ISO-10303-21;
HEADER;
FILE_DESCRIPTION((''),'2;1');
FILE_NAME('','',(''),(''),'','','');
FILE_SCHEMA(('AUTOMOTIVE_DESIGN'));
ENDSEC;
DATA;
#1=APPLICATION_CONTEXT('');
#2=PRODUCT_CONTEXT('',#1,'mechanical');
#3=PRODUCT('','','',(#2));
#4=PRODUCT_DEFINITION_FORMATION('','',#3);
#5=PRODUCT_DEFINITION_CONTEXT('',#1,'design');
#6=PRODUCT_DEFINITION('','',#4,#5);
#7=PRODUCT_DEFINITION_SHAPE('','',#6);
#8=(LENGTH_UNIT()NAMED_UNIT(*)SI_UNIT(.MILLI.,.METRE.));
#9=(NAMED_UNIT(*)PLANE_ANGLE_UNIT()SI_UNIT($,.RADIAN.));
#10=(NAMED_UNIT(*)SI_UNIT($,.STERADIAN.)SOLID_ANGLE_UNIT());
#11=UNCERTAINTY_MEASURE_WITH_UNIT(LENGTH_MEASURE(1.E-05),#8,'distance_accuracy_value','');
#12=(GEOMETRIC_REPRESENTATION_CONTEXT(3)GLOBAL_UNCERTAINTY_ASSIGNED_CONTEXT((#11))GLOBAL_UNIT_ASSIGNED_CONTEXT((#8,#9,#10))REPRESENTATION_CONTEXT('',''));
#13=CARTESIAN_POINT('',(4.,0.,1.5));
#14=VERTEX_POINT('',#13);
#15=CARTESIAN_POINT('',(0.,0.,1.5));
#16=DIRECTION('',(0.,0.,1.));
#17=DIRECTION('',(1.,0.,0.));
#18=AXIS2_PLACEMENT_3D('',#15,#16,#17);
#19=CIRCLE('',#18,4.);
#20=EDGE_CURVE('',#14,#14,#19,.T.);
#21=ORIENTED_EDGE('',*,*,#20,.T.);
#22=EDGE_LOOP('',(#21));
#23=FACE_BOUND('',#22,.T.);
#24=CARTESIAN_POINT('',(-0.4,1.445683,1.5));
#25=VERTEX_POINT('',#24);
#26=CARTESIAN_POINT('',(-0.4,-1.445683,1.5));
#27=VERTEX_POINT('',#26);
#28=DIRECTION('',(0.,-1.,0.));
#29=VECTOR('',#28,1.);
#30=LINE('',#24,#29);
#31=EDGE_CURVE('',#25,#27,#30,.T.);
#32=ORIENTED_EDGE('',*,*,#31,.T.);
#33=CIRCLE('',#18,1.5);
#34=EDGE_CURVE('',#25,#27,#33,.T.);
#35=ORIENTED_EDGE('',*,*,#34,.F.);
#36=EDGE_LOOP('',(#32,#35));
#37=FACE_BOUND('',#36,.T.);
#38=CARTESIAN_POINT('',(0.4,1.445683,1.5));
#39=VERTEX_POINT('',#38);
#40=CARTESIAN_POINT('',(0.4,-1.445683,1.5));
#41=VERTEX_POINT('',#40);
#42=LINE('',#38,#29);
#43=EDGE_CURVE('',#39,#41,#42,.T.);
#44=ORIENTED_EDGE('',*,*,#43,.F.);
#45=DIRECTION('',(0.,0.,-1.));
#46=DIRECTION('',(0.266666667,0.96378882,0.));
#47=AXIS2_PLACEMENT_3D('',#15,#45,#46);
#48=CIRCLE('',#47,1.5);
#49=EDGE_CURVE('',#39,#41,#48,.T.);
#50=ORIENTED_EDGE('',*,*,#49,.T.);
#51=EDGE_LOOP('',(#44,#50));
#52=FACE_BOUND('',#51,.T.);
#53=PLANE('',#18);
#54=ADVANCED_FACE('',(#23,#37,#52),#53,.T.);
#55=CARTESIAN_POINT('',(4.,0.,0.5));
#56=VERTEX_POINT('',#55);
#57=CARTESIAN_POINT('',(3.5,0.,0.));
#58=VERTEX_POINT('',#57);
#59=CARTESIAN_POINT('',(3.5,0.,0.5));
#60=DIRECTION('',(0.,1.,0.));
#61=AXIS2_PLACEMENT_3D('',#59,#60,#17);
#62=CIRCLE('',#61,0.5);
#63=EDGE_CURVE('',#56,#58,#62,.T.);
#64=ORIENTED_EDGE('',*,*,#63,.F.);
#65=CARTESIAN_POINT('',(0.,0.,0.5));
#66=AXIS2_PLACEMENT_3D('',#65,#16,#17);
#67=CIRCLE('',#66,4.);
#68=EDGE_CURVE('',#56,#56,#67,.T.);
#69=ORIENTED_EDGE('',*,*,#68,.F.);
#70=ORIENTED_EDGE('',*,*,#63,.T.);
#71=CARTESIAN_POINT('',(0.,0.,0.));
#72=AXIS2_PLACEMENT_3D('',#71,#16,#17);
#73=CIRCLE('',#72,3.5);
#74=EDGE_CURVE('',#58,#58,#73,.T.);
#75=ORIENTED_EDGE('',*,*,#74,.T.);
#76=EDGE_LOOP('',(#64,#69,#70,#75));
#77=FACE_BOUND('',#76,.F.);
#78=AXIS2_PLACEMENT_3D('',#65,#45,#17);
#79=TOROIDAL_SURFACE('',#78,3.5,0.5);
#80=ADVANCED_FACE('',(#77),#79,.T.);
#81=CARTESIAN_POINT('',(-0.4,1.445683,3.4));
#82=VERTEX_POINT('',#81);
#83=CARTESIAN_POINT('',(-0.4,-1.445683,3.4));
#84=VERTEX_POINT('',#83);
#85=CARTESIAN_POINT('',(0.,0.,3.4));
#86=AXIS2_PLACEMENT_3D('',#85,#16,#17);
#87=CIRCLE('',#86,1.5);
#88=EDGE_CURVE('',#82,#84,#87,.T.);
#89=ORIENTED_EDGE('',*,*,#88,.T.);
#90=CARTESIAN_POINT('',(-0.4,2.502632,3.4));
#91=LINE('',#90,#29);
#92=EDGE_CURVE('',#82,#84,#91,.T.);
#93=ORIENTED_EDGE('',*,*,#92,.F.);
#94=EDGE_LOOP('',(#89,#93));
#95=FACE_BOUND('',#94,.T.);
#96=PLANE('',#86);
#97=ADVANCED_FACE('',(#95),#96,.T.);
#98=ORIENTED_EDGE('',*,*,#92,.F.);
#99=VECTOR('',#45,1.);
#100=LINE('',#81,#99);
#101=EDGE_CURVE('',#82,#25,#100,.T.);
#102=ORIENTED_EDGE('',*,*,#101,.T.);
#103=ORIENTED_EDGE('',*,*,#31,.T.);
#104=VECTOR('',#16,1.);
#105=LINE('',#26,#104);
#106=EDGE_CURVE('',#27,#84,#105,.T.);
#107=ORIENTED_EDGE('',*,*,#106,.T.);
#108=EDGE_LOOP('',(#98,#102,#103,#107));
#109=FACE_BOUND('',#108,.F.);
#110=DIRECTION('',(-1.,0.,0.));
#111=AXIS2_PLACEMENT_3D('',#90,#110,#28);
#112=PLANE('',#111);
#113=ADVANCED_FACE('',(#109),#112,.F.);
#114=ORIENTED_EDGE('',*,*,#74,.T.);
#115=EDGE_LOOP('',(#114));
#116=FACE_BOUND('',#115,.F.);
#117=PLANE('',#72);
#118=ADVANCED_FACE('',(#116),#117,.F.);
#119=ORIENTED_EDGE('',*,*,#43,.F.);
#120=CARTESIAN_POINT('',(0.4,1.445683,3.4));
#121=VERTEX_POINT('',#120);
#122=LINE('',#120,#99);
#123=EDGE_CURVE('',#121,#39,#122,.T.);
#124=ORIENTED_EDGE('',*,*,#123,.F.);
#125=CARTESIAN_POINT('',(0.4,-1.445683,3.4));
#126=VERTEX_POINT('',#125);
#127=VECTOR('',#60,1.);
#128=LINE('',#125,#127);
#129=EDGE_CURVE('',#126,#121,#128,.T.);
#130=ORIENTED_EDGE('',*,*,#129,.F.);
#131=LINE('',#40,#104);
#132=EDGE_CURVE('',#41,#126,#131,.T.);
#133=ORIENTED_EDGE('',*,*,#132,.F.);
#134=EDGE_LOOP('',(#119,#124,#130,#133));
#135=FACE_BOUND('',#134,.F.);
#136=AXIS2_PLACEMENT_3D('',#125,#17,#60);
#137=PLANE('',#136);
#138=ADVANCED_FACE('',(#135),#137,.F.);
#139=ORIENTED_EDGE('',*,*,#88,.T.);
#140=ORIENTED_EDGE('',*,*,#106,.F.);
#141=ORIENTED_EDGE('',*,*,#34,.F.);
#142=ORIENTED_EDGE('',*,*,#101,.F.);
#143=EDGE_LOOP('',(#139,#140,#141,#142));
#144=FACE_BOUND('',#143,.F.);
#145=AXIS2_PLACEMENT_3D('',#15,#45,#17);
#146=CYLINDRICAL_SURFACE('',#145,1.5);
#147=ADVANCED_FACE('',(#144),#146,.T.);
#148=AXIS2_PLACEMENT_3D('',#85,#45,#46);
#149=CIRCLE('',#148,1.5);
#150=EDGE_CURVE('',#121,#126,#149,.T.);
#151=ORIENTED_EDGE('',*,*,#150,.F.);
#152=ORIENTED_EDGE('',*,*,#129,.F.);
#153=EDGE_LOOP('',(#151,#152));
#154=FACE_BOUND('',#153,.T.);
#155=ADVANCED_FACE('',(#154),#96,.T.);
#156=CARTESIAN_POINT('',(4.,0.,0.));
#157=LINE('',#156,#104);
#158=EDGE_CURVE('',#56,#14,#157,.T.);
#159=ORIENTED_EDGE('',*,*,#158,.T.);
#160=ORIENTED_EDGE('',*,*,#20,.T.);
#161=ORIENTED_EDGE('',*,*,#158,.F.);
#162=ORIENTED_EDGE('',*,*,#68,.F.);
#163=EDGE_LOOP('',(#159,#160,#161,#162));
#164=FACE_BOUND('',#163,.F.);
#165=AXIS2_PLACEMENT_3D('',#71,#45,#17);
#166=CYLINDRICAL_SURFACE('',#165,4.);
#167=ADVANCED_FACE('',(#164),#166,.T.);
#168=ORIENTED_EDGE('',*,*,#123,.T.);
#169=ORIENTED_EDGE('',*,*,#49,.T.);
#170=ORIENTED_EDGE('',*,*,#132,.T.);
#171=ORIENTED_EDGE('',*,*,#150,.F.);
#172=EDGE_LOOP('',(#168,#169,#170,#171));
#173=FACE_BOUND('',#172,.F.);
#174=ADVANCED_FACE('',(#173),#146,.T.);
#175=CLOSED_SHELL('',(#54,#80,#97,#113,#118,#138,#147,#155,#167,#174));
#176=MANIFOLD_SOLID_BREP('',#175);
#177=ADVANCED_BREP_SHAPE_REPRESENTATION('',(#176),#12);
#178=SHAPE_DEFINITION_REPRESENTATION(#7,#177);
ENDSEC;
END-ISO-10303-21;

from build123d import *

# Parameters (mm, degrees)
F0_R     = 4
F1_DEPTH = 1.5
F2_R     = 1.5
F3_DEPTH = 1.9
F5_DEPTH = 1.9
F7_DEPTH = 0.3
F8_R     = 0.5


# Not quite as in the source:
# - a feature names something its author has since deleted; it is built from what else it names


with BuildPart() as f1:
    # F0 (on Top) → F1 (new body)
    with BuildSketch(Plane.XY):
        Circle(F0_R)
    extrude(amount=F1_DEPTH)

    # F2 (on face) → F3 (join)
    with BuildSketch(Plane.XY.offset(1.5)):
        Circle(F2_R)
    extrude(amount=F3_DEPTH)

    # F4 (on face) → F5 (cut)
    with BuildSketch(Plane.XY.offset(3.4)):
        with BuildLine():
            ThreePointArc((-0.4, -1.4456832295), (0, -1.5), (0.4, -1.4456832295))
            Line((0.4, -1.4456832295), (0.4, 1.4456832295))
            ThreePointArc((0.4, 1.4456832295), (0, 1.5), (-0.4, 1.4456832295))
            Line((-0.4, 1.4456832295), (-0.4, -1.4456832295))
        make_face()
        with BuildLine():
            ThreePointArc((-0.4, 1.4456832295), (0, 1.5), (0.4, 1.4456832295))
            Line((0.4, 1.4456832295), (0.4, 2.5026321411))
            Line((0.4, 2.5026321411), (-0.4, 2.5026321411))
            Line((-0.4, 2.5026321411), (-0.4, 1.4456832295))
        make_face()
    extrude(amount=-F5_DEPTH, mode=Mode.SUBTRACT)

    # F6 (on face) → F7 (join)
    with BuildSketch(Plane.XY.offset(1.5)):
        with BuildLine():
            ThreePointArc((0.4, 1.3937359865), (1.1581234822, 0.8724964183), (1.45, 0))
            ThreePointArc((1.45, 0), (1.1581234822, -0.8724964183), (0.4, -1.3937359865))
            Line((0.4, -1.3937359865), (0.4, -1.4456832295))
            ThreePointArc((0.4, -1.4456832295), (1.5, 0), (0.4, 1.4456832295))
            Line((0.4, 1.4456832295), (0.4, 1.3937359865))
        make_face()
        with BuildLine():
            ThreePointArc((-0.4, -1.3937359865), (-1.45, 0), (-0.4, 1.3937359865))
            Line((-0.4, 1.3937359865), (-0.4, 1.4456832295))
            ThreePointArc((-0.4, 1.4456832295), (-1.5, 0), (-0.4, -1.4456832295))
            Line((-0.4, -1.4456832295), (-0.4, -1.3937359865))
        make_face()
    extrude(amount=F7_DEPTH)

    # F8
    f8_edges = [f1.edges().sort_by_distance(p)[0] for p in [
        (-4, 0, 0),
    ]]
    fillet(f8_edges, radius=F8_R)


solid = f1.part
